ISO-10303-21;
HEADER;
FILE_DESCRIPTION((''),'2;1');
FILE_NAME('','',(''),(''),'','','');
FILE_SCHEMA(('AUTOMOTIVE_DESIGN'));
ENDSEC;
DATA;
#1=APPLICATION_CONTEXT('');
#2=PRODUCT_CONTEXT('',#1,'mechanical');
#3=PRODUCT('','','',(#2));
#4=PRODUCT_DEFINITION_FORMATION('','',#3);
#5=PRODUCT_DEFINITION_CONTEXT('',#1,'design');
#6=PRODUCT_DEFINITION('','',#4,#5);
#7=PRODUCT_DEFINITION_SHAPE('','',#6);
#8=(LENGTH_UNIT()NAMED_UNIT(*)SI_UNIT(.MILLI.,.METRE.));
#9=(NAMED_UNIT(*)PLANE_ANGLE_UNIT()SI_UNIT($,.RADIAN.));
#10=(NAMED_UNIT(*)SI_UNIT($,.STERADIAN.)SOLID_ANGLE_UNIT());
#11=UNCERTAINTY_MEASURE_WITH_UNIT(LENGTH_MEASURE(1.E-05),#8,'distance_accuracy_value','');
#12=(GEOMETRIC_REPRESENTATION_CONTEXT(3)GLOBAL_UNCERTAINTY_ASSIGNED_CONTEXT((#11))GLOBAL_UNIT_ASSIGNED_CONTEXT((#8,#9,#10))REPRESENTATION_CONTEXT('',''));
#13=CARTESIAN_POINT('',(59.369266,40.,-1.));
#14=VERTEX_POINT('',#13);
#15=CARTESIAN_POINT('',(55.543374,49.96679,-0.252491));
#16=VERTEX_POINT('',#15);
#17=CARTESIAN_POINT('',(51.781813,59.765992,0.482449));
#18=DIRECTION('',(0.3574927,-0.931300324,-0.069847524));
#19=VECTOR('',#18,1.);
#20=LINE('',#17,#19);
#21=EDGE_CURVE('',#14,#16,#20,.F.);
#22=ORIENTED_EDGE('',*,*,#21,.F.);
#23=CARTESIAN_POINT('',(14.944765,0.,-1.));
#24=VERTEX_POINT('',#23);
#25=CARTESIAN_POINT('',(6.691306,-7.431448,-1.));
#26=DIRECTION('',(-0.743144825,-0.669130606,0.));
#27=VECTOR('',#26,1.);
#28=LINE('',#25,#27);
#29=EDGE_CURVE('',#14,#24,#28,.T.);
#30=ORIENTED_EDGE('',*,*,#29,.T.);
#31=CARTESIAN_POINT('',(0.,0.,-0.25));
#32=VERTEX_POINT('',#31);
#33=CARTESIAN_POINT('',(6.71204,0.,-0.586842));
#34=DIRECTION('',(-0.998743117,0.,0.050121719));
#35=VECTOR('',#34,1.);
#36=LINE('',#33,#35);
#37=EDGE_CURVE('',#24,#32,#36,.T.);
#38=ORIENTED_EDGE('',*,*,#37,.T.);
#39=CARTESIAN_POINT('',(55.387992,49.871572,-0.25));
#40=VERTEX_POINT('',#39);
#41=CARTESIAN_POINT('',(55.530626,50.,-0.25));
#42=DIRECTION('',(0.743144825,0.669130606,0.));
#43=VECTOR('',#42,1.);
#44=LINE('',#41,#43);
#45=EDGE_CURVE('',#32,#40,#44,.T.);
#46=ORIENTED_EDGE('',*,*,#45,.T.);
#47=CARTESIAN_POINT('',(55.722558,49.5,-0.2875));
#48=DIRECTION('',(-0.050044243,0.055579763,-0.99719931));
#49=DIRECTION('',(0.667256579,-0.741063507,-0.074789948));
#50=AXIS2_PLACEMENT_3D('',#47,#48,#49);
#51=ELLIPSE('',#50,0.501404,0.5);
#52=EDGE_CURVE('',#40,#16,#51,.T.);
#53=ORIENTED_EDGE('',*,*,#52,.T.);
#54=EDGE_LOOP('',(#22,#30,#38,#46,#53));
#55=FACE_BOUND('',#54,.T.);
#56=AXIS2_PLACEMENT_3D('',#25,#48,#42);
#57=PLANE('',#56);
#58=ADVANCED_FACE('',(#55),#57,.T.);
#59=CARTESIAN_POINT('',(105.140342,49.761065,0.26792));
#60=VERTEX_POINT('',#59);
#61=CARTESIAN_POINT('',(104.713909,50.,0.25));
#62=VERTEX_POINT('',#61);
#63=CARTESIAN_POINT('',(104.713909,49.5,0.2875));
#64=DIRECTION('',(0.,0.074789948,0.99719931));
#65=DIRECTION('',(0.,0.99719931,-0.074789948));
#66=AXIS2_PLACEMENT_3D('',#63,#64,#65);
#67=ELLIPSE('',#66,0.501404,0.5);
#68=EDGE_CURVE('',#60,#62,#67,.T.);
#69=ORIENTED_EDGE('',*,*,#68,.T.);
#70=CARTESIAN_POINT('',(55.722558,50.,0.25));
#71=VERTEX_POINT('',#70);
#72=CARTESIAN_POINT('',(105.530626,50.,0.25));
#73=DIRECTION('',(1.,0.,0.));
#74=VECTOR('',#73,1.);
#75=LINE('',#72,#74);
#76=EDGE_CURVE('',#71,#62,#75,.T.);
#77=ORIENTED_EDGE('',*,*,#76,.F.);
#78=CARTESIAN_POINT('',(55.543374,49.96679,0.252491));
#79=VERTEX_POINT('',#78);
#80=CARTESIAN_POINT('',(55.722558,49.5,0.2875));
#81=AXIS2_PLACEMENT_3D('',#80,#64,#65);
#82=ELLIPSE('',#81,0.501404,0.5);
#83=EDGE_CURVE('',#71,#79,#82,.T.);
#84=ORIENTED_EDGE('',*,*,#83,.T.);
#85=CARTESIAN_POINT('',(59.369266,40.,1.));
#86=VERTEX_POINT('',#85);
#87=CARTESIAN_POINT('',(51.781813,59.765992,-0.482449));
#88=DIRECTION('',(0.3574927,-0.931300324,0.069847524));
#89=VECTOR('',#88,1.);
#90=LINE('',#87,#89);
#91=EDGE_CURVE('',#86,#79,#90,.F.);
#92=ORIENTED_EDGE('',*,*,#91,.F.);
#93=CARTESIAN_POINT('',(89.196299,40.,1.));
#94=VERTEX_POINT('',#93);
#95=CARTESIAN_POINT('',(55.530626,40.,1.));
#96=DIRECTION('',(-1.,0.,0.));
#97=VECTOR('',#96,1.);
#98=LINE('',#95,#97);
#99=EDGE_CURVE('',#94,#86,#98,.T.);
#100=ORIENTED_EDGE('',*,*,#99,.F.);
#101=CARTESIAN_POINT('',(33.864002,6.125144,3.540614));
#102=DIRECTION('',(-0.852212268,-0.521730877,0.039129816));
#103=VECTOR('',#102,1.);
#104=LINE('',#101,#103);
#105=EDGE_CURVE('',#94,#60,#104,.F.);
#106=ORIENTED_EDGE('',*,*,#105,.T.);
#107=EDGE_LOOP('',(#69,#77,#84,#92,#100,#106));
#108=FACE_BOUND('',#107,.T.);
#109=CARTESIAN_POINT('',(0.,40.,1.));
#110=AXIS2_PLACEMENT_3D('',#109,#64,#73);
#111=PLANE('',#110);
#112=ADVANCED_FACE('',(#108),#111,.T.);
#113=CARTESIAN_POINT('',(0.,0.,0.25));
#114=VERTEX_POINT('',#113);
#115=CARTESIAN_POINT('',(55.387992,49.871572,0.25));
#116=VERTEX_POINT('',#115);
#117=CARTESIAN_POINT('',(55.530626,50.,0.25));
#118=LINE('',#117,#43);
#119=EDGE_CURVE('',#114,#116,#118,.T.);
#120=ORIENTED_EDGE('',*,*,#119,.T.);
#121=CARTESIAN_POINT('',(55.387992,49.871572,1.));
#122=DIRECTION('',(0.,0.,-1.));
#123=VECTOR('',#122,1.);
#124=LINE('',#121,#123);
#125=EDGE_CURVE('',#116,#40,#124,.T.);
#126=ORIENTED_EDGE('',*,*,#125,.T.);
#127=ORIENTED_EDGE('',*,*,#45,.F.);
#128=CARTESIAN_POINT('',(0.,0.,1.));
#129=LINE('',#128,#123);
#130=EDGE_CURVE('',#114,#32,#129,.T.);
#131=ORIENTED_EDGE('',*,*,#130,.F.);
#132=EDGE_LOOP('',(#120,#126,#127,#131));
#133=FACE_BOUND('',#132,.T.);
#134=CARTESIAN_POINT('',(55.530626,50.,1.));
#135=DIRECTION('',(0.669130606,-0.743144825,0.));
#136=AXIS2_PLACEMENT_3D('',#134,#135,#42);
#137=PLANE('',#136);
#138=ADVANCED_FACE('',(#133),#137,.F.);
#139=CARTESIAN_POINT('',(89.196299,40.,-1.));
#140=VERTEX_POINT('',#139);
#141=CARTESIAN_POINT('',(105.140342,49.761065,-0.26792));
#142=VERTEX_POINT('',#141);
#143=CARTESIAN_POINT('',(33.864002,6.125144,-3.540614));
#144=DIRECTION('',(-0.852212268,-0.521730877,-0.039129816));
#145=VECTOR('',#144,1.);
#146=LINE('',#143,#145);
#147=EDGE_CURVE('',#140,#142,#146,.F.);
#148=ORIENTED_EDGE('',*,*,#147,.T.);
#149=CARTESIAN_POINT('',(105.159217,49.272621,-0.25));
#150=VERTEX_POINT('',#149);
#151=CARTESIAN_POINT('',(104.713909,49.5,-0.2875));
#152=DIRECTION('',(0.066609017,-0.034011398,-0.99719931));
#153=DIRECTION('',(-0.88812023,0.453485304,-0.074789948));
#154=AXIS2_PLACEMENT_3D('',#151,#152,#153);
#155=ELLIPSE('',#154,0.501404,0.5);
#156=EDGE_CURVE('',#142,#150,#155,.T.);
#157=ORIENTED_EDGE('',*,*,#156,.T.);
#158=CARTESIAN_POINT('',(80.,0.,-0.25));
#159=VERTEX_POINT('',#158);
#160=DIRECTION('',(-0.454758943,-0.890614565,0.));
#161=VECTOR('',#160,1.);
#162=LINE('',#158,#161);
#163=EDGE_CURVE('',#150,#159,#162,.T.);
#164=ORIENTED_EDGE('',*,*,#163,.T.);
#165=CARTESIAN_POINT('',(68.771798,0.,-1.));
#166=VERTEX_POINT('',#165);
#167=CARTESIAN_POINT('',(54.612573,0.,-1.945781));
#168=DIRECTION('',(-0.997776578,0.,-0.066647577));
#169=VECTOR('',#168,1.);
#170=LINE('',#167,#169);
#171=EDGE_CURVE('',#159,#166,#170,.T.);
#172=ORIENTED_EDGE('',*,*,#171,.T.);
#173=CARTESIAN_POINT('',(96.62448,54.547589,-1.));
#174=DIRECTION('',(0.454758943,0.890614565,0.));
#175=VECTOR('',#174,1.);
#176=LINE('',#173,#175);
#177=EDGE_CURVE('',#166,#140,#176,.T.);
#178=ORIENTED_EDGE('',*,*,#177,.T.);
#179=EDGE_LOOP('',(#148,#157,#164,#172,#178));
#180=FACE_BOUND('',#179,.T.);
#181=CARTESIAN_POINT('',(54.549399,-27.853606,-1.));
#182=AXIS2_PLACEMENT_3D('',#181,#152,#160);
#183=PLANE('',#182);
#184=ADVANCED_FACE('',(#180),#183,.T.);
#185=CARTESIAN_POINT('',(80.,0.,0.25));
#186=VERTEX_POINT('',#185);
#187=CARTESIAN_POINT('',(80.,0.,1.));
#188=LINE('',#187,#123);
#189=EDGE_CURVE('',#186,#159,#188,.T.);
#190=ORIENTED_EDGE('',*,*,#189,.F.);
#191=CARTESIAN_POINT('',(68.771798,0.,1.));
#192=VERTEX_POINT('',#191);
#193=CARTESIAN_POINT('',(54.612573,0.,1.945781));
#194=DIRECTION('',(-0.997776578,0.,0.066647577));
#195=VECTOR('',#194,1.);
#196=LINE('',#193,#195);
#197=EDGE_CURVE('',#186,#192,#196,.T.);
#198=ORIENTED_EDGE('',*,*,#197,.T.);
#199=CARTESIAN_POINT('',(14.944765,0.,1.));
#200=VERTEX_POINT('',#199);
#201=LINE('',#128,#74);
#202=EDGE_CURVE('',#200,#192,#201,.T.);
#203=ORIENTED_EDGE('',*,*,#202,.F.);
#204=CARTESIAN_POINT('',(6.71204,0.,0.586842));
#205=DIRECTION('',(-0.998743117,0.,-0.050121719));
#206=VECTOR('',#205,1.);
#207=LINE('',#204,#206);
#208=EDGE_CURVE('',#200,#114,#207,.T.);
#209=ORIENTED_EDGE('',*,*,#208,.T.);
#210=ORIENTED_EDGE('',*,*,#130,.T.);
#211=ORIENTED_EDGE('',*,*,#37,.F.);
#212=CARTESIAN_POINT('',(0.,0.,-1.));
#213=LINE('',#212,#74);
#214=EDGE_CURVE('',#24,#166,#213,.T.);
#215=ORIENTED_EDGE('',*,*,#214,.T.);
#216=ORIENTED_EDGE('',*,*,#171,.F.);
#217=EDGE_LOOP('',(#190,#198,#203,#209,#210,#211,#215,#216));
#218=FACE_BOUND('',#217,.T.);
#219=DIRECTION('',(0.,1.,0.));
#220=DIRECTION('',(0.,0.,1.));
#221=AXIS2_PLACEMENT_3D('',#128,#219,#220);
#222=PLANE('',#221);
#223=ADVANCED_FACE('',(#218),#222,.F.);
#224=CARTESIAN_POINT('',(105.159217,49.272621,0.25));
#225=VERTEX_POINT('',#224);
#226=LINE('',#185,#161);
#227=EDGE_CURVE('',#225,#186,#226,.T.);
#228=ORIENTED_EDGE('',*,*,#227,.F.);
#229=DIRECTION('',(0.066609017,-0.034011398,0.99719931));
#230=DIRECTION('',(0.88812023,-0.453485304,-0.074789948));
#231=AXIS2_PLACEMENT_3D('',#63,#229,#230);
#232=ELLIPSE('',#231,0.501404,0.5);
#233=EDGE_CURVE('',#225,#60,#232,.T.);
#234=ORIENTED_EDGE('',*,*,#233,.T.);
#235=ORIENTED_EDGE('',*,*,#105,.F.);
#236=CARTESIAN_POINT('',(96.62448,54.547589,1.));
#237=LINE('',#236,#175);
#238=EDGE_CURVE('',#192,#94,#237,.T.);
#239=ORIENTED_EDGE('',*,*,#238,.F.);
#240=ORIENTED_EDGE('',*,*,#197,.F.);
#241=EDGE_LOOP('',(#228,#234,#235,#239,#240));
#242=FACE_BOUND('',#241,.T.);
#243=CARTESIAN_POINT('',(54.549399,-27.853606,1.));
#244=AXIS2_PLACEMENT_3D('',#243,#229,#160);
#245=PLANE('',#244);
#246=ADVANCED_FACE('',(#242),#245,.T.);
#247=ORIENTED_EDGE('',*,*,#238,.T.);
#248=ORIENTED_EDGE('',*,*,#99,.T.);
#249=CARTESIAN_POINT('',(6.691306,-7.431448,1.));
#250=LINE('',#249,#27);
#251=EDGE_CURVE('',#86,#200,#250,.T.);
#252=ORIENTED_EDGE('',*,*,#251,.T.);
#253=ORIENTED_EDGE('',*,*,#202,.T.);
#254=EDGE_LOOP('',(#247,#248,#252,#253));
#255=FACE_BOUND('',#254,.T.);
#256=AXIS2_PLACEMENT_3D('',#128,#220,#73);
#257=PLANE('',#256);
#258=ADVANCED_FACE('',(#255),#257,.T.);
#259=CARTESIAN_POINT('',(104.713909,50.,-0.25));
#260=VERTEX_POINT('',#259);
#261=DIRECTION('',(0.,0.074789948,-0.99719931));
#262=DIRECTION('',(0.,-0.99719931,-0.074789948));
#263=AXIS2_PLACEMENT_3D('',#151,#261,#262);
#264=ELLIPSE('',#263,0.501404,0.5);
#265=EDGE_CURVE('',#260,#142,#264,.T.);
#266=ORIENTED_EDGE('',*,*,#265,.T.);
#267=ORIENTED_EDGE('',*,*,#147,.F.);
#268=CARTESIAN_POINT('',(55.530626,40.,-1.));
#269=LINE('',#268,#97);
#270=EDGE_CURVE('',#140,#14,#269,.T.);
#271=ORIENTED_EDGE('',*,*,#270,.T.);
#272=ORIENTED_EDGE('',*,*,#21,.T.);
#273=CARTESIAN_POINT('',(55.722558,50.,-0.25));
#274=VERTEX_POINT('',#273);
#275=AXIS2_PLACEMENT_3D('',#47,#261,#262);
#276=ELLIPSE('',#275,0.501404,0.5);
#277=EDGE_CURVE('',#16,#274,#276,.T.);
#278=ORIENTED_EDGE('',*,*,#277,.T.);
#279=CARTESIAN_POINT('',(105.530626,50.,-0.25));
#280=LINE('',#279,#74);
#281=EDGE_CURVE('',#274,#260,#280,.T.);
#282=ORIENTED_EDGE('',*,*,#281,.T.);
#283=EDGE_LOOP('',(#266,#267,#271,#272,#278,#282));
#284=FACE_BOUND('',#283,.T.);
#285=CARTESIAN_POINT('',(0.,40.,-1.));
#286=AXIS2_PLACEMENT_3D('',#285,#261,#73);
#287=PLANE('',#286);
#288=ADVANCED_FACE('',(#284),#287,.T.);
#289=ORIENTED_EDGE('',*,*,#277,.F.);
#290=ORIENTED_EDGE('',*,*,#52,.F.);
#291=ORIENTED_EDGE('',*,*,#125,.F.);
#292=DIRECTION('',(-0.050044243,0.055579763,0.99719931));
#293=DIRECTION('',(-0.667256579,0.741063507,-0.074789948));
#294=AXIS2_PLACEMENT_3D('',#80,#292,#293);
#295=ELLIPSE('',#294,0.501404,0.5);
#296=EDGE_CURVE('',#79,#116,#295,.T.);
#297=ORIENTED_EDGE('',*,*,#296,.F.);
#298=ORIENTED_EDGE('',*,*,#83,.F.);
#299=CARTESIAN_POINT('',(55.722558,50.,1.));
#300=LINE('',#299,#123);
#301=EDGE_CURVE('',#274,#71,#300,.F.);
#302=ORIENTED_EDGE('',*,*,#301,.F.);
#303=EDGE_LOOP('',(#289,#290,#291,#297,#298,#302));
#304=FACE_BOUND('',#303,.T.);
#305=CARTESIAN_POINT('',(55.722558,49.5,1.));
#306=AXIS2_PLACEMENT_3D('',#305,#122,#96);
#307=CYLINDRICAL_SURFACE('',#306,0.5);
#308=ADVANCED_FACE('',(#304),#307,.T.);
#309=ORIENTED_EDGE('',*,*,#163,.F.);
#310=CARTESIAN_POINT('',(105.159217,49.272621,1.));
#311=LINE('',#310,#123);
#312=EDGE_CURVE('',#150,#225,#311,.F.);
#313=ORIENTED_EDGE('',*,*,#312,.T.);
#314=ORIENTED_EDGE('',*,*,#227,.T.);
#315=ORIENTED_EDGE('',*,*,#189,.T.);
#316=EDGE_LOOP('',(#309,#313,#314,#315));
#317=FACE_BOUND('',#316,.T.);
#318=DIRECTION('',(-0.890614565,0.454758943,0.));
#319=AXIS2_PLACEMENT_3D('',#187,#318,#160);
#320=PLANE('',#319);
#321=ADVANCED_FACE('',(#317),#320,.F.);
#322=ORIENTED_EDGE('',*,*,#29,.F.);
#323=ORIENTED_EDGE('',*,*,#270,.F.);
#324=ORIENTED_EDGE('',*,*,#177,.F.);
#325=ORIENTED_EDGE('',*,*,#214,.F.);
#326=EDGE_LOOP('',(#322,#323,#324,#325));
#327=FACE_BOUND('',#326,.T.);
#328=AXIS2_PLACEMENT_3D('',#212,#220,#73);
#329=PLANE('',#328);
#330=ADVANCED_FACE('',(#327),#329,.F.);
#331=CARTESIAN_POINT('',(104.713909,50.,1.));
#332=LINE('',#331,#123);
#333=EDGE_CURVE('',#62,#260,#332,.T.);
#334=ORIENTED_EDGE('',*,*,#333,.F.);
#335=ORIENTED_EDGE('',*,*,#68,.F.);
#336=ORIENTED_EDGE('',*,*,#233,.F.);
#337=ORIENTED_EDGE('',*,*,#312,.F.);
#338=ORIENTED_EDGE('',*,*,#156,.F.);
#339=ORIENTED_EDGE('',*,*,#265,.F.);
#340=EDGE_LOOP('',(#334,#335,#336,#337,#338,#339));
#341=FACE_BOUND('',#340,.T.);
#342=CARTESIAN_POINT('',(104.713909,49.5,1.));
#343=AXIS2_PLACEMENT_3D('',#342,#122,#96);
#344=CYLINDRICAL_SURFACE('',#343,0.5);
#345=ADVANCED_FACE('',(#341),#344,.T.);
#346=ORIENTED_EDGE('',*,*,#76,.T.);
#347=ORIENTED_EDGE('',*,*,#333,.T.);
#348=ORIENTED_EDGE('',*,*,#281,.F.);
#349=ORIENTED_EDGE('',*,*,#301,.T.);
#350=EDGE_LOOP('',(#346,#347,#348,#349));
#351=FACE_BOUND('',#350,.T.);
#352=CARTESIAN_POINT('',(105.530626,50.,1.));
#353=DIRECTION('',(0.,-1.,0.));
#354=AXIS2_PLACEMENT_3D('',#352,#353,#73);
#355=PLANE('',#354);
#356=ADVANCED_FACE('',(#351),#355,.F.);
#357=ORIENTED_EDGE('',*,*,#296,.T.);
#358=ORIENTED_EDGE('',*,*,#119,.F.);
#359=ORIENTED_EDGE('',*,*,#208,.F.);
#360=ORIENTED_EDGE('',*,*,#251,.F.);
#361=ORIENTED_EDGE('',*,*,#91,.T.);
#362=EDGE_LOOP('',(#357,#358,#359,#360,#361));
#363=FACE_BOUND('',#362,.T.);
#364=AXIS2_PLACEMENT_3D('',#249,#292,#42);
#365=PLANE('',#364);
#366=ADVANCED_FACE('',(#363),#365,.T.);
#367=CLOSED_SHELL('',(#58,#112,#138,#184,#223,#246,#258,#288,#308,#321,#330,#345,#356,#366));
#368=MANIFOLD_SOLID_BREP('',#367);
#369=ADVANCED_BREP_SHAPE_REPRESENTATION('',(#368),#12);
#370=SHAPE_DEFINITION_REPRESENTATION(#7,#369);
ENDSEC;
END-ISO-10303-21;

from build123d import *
from OCP.BRepFilletAPI import BRepFilletAPI_MakeChamfer

# Parameters (mm, degrees)
BOSS_EXTRUDE1_DEPTH = 1
CHAMFER1_SIZE       = 0.75
CHAMFER1_SIZE2      = 10
FILLET1_R           = 0.5


# Read off the part's stored shape, not the designer's step: Mirror1
with BuildPart() as part:
    # Sketch1 → Boss-Extrude1 (new, symmetric)
    with BuildSketch(Plane.XY):
        Polygon((0, 0), (80, 0), (105.530625741, 50), (55.530625741, 50), align=None)
    extrude(amount=BOSS_EXTRUDE1_DEPTH, both=True)

    # Chamfer1: one chamfer whose edges measure the first distance from different faces: ONE call of the kernel's chamfer builder (chamfer() names one face for all edges)
    chamfer1_edges_1 = [part.edges().sort_by_distance(p)[0] for p in [
        (92.765312871, 25, 1),
    ]]
    chamfer1_side_1 = [part.faces().sort_by_distance(p)[0] for p in [
        (92.765312871, 25, 0),
    ]]
    chamfer1_edges_2 = [part.edges().sort_by_distance(p)[0] for p in [
        (80.530625741, 50, 1),
    ]]
    chamfer1_side_2 = [part.faces().sort_by_distance(p)[0] for p in [
        (80.530625741, 50, 0),
    ]]
    chamfer1_edges_3 = [part.edges().sort_by_distance(p)[0] for p in [
        (27.765312871, 25, 1),
    ]]
    chamfer1_side_3 = [part.faces().sort_by_distance(p)[0] for p in [
        (27.765312871, 25, 0),
    ]]
    chamfer1 = BRepFilletAPI_MakeChamfer(part.part.solid().wrapped)
    for e in chamfer1_edges_1:
        chamfer1.Add(CHAMFER1_SIZE, CHAMFER1_SIZE2, e.wrapped, chamfer1_side_1[0].wrapped)  # the first distance lies on this face
    for e in chamfer1_edges_2:
        chamfer1.Add(CHAMFER1_SIZE, CHAMFER1_SIZE2, e.wrapped, chamfer1_side_2[0].wrapped)  # the first distance lies on this face
    for e in chamfer1_edges_3:
        chamfer1.Add(CHAMFER1_SIZE, CHAMFER1_SIZE2, e.wrapped, chamfer1_side_3[0].wrapped)  # the first distance lies on this face
    add(Compound.cast(chamfer1.Shape()), mode=Mode.REPLACE)

    # Mirror1
    split(bisect_by=Plane.XY, keep=Keep.TOP)

    # Mirror1 2: part across plane


with BuildPart() as part_1:
    add(part.part)
    add(part.part.mirror(Plane.XY))

    # Fillet1
    fillet1_edges = [part_1.edges().sort_by_distance(p)[0] for p in [
        (55.530625741, 50, 0),
        (105.530625741, 50, 0),
    ]]
    fillet(fillet1_edges, radius=FILLET1_R)


solid = part_1.part
